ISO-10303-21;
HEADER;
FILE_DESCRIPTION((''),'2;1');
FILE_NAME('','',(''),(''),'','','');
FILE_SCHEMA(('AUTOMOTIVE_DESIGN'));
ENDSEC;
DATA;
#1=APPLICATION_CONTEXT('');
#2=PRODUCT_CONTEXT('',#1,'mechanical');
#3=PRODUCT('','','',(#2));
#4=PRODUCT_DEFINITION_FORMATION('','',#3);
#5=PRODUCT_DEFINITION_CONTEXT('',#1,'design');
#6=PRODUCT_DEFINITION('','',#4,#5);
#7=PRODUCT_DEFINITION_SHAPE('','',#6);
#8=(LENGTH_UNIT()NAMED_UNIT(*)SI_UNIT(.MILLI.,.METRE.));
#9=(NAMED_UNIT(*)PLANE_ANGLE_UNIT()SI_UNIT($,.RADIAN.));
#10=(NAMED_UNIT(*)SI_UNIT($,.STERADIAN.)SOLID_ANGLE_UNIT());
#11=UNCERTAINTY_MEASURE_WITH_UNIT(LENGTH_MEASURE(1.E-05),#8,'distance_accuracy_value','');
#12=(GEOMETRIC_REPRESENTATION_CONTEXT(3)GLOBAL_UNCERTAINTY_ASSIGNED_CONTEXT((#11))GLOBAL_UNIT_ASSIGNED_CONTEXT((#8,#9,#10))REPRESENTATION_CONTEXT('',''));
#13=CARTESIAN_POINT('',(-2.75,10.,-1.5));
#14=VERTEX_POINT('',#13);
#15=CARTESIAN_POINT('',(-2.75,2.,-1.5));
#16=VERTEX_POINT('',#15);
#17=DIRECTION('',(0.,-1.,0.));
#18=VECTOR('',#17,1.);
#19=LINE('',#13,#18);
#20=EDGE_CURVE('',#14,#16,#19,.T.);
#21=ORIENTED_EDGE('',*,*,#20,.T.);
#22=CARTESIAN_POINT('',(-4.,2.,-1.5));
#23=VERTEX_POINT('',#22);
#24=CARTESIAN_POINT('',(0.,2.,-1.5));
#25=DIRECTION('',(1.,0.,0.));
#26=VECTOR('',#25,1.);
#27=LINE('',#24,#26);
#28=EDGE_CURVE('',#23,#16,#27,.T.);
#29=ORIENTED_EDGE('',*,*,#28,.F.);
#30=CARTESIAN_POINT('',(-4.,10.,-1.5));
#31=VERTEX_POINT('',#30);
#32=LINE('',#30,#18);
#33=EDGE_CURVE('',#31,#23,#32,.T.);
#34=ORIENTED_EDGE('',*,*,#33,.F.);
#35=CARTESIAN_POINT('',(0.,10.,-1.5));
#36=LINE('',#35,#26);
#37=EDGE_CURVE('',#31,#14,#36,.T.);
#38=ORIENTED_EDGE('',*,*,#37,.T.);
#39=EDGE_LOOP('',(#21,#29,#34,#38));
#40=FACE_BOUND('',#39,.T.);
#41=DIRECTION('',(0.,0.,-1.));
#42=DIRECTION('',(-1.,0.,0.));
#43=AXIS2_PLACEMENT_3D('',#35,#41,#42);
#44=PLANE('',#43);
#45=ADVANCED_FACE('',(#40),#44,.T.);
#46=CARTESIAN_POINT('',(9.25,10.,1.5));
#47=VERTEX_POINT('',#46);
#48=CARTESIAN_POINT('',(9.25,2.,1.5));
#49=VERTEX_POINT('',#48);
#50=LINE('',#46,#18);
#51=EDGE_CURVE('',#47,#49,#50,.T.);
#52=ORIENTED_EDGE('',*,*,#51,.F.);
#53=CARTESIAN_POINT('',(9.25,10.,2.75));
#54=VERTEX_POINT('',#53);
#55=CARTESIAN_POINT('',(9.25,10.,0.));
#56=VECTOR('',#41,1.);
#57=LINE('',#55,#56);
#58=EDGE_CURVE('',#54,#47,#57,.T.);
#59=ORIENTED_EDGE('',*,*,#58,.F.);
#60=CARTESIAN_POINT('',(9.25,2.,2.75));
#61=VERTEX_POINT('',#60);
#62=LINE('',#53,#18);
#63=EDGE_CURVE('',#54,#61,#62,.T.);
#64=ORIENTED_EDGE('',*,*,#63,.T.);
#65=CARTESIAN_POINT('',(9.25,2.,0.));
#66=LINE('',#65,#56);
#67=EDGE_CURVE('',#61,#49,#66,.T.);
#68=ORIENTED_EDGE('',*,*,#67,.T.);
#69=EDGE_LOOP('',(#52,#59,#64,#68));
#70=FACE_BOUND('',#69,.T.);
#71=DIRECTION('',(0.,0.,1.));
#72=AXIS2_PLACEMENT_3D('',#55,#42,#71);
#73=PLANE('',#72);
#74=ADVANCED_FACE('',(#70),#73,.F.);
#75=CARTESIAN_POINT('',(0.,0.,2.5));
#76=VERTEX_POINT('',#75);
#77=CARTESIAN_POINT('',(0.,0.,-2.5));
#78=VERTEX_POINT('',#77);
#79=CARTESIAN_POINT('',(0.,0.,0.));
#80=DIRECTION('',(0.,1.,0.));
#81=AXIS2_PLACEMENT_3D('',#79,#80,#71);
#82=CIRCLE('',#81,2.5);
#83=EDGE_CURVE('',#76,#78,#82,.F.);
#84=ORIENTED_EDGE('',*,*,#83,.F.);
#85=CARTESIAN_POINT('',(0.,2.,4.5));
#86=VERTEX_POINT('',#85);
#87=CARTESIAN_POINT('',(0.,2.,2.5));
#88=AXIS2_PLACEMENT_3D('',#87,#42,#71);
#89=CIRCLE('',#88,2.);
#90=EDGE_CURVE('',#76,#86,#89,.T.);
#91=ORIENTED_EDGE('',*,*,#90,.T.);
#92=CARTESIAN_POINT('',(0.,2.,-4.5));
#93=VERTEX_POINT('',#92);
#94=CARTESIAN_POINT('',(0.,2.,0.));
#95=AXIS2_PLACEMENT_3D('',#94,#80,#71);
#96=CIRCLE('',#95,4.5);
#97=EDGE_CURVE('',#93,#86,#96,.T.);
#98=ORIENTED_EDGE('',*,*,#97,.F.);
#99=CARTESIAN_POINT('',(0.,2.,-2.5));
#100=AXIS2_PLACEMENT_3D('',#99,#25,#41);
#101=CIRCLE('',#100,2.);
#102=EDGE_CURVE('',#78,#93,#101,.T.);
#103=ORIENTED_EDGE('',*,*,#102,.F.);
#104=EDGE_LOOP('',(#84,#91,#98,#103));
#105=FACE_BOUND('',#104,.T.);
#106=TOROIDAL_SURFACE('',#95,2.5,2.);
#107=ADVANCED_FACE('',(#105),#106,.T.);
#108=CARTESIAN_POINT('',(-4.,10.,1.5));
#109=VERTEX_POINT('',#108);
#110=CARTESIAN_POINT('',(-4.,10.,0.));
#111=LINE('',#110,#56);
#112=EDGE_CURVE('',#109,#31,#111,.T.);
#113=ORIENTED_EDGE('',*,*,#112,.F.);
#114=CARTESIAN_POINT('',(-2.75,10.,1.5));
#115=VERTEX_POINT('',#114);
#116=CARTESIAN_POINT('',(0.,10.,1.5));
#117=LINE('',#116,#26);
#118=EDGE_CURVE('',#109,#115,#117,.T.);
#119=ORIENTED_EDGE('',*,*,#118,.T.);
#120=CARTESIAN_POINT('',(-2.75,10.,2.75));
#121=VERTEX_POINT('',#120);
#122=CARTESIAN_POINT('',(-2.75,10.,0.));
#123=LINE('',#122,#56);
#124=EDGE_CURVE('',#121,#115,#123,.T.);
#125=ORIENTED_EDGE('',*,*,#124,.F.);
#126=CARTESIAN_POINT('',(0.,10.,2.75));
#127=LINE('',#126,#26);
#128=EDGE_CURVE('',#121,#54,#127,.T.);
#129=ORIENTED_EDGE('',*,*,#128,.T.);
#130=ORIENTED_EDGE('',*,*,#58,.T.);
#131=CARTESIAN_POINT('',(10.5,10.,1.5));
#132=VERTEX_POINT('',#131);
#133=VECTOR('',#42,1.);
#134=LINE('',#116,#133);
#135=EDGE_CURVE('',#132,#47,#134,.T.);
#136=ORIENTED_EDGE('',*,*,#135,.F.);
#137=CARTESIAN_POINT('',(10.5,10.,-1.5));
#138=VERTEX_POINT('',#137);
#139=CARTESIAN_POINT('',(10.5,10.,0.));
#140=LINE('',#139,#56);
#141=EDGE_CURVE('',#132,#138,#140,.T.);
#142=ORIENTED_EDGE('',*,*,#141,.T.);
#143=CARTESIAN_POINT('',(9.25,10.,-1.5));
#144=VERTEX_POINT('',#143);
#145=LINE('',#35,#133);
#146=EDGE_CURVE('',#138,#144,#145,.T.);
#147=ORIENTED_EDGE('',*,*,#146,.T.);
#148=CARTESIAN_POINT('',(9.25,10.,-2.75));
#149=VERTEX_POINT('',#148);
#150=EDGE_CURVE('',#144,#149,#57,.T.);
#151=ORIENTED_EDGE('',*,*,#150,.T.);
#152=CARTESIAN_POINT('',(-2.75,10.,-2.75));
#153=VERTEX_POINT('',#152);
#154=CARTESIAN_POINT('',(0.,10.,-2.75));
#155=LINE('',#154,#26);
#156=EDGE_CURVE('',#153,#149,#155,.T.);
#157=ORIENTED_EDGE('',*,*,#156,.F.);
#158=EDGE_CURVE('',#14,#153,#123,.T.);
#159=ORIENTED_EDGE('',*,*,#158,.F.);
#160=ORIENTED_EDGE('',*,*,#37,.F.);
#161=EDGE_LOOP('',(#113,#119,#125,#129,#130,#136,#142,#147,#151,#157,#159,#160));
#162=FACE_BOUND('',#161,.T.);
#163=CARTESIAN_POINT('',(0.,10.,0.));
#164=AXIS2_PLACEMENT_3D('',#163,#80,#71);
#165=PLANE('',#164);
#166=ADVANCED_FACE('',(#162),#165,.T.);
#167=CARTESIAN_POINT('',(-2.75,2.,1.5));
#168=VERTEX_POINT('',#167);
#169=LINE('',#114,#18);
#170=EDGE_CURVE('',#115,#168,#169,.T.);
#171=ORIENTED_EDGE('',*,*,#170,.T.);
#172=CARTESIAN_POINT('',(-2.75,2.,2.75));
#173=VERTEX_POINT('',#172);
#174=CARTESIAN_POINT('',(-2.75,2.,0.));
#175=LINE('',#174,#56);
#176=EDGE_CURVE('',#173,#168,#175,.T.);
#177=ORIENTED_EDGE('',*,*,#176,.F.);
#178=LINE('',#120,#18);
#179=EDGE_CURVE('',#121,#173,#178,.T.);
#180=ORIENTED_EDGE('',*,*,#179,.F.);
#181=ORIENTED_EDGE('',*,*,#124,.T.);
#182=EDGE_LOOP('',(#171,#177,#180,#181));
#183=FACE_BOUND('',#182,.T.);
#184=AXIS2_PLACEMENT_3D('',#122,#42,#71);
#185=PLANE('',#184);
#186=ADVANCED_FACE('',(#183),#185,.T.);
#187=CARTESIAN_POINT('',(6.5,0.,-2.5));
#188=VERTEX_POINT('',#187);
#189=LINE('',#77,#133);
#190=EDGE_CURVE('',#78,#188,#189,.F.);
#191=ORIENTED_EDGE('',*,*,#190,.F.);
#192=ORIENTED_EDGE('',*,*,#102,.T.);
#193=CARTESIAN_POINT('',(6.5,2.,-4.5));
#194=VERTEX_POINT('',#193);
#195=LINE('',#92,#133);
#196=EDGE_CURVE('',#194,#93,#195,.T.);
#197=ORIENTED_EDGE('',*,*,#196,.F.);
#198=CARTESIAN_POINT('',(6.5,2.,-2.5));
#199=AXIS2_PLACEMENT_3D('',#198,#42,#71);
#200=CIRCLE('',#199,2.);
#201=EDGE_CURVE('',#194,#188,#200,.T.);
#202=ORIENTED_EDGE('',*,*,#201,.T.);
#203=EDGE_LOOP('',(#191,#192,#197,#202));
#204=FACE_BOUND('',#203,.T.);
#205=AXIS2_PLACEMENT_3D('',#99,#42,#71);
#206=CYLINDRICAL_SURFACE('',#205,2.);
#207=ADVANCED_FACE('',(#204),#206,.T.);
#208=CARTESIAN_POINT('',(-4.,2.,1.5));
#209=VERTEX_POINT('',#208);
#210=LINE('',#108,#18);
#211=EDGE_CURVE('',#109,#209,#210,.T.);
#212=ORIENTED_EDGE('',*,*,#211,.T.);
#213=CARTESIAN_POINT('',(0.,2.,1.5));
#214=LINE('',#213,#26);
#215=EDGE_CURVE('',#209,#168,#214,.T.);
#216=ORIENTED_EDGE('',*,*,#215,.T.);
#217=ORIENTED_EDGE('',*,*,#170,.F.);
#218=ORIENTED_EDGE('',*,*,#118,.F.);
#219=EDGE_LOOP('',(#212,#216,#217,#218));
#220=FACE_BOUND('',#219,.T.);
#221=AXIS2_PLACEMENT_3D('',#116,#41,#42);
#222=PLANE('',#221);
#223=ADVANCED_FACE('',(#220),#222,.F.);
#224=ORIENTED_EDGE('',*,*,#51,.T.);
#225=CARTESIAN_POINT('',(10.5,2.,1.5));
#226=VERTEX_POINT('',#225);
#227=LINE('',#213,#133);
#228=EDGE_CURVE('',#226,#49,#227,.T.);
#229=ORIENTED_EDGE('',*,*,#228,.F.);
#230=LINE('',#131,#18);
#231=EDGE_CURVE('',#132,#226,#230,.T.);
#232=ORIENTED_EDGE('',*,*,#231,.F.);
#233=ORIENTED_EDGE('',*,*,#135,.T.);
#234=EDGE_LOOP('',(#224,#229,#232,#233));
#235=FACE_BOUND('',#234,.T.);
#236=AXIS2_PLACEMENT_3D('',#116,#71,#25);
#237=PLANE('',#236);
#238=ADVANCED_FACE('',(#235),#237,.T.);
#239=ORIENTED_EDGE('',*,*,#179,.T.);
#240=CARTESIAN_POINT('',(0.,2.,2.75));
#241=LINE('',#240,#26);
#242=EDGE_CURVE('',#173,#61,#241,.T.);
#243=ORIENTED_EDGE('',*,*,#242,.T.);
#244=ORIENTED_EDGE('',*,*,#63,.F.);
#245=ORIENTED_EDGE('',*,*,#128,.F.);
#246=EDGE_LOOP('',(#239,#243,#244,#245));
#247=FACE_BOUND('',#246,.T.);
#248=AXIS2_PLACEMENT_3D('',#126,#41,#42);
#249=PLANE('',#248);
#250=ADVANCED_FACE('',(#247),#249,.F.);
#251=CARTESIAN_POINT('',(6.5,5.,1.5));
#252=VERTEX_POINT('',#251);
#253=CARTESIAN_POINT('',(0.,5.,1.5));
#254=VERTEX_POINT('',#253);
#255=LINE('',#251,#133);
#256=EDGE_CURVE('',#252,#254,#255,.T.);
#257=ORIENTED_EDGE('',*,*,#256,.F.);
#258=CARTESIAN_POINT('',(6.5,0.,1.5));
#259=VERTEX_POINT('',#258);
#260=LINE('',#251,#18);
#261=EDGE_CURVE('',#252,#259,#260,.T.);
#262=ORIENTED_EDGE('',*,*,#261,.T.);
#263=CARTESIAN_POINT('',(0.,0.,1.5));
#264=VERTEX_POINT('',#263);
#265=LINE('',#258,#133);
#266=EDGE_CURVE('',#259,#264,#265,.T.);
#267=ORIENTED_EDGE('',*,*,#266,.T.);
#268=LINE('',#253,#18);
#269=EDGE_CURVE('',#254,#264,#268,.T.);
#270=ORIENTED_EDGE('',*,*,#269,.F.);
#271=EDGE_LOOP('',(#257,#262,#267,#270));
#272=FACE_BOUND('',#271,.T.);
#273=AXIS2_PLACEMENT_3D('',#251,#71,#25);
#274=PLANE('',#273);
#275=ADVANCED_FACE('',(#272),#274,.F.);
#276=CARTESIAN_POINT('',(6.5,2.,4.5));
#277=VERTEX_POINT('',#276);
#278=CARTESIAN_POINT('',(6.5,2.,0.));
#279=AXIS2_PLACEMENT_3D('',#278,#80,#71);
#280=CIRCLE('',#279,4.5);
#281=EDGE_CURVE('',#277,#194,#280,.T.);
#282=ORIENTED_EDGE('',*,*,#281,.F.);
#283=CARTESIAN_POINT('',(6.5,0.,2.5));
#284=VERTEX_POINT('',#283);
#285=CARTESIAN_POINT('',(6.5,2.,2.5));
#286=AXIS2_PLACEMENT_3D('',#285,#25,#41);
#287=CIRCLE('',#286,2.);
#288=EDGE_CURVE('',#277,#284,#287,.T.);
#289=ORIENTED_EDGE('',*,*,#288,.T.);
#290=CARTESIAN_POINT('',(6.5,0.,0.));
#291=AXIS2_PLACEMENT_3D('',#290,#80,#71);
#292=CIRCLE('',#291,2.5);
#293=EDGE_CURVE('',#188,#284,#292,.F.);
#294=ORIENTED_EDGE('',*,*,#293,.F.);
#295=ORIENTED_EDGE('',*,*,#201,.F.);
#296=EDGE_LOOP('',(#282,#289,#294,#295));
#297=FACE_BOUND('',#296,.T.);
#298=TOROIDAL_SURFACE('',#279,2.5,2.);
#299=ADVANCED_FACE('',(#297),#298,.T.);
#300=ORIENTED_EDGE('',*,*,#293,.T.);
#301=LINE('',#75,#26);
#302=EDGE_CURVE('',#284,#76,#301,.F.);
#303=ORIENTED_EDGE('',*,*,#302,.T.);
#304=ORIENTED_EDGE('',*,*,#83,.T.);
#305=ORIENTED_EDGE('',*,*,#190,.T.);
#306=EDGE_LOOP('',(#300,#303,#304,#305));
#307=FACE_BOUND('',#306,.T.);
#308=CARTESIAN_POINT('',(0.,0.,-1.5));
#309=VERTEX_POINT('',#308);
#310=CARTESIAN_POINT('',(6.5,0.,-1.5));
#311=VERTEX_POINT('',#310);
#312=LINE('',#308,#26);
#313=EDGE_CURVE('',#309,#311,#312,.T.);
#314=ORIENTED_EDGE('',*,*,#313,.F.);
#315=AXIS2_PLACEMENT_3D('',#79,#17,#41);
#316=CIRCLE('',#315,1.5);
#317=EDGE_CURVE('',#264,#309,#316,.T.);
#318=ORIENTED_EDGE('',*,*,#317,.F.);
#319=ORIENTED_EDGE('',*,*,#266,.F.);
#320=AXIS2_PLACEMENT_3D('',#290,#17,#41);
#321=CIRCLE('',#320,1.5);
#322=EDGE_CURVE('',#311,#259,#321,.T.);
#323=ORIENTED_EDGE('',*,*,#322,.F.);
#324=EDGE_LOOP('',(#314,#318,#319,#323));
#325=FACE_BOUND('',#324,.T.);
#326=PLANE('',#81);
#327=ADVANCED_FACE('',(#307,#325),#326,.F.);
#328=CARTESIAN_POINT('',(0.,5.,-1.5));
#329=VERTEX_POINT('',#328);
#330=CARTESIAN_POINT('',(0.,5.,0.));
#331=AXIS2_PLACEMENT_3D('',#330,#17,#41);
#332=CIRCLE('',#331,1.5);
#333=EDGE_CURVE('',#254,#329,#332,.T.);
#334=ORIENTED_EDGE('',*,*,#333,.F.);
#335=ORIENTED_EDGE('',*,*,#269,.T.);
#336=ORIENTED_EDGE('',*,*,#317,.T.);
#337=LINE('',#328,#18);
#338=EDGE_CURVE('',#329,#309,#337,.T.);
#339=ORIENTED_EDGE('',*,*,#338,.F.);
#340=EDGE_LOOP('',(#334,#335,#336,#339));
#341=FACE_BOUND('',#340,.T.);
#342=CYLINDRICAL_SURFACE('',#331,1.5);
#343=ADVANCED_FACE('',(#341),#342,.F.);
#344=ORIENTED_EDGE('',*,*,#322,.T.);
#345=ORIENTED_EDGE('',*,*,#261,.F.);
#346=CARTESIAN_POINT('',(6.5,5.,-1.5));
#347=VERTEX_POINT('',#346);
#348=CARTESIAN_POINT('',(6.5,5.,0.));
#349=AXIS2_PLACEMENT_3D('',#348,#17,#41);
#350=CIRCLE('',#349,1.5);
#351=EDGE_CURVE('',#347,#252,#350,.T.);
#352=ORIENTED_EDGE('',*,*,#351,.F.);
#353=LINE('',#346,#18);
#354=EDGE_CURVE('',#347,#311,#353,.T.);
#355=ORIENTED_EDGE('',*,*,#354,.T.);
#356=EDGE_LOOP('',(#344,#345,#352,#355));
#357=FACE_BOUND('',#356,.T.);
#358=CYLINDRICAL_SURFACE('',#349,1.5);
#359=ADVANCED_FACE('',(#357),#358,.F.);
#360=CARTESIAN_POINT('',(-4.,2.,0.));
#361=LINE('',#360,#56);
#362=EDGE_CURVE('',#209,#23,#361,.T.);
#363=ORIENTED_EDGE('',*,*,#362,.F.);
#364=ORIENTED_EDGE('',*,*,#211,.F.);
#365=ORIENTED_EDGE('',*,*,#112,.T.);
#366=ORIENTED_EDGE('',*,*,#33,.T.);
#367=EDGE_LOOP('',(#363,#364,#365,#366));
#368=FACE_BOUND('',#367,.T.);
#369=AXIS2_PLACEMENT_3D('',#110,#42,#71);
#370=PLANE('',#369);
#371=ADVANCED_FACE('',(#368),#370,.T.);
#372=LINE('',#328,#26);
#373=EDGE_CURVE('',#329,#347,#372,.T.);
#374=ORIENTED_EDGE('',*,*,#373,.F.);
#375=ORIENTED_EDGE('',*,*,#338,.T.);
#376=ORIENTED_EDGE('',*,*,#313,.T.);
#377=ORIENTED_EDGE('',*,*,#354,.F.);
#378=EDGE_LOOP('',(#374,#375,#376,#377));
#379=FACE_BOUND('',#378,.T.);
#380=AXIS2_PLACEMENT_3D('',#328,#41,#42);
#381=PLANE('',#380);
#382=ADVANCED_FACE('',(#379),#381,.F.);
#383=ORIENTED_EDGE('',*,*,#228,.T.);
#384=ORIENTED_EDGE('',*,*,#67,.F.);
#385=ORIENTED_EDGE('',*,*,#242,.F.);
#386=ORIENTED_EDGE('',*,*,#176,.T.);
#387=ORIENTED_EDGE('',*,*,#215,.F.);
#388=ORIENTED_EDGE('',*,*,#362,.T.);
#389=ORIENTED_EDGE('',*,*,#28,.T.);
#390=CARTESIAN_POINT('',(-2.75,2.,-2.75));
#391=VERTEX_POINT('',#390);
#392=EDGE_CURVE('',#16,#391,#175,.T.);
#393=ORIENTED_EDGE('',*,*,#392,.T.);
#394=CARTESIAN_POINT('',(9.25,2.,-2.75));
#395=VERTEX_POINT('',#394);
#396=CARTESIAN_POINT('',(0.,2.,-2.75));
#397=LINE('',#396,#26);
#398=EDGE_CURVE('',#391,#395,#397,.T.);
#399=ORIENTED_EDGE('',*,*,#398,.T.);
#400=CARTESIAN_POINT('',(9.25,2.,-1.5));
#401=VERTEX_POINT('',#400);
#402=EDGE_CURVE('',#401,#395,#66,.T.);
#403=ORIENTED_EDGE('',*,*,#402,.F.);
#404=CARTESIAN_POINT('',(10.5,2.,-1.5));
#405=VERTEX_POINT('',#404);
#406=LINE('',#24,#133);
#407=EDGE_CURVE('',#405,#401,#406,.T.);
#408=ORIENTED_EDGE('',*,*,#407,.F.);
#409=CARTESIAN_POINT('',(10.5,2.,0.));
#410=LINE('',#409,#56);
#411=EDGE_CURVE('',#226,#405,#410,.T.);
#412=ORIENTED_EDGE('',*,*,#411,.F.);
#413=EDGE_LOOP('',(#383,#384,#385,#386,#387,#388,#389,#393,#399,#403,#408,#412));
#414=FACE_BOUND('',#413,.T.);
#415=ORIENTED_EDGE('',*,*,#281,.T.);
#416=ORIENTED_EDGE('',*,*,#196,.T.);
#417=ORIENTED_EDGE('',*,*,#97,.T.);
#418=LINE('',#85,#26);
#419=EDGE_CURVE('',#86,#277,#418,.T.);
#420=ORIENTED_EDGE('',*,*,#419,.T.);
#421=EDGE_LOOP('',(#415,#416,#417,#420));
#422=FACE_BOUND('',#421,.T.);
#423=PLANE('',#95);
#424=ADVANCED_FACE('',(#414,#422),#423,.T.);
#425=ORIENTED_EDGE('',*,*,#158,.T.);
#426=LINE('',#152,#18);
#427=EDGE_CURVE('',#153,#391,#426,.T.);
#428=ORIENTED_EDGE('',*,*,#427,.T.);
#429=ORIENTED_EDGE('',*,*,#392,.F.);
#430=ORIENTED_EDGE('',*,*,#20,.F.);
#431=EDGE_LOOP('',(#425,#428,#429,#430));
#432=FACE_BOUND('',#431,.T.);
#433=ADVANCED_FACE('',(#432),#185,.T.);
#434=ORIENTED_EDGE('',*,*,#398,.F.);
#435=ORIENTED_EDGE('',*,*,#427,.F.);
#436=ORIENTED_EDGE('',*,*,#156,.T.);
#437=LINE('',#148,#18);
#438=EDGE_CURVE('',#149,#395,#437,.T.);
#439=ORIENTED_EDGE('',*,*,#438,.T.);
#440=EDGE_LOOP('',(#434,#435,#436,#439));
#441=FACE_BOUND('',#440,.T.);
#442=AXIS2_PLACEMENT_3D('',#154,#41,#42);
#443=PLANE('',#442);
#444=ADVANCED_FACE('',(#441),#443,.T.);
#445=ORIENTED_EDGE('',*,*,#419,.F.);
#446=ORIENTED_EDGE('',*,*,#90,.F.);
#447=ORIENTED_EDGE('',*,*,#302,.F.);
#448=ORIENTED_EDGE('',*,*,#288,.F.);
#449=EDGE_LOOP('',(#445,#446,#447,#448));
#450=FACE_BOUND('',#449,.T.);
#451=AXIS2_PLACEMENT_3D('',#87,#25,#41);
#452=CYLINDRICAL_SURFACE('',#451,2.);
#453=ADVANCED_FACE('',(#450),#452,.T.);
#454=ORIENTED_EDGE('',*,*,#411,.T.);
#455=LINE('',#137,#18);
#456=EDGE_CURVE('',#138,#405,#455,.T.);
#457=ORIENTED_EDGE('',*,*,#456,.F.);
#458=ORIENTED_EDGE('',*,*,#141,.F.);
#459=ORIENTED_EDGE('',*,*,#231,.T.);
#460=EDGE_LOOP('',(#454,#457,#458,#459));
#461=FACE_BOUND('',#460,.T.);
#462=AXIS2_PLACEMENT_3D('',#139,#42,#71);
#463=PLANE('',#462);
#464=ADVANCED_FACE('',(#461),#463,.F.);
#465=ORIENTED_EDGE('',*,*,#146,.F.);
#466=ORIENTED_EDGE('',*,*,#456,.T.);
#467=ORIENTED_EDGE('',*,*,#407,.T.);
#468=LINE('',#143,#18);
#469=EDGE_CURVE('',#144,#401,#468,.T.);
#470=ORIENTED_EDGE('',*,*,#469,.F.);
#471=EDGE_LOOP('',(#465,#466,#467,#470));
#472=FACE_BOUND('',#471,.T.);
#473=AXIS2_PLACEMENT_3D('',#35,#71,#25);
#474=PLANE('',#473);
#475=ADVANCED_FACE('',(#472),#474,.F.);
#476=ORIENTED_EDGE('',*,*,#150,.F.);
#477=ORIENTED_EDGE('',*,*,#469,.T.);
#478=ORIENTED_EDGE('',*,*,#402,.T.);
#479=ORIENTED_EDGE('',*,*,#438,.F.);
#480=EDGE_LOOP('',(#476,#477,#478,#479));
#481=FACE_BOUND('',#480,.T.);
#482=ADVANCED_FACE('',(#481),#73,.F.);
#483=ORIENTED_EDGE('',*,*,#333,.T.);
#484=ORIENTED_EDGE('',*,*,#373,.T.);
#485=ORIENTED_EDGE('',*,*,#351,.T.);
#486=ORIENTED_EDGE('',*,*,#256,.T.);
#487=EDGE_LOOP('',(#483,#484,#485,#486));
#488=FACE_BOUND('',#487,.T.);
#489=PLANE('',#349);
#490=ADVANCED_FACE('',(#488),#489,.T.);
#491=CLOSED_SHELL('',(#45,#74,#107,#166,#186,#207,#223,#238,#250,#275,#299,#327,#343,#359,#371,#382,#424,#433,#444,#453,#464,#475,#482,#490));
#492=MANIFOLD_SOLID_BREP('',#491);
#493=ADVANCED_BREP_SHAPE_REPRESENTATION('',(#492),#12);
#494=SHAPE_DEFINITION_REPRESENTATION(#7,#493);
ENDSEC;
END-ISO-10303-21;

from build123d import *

# Parameters (mm, degrees)
BOSS_EXTRU_1_DEPTH      = 2
CONG_1_R                = 2
BOSS_EXTRU_2_DEPTH      = 8
ENL_V_MAT_EXTRU_1_DEPTH = 5


with BuildPart() as part:
    # Esquisse1 → Boss.-Extru.1 (new body)
    with BuildSketch(Plane(origin=(0, 0, 0), x_dir=(1, 0, 0), z_dir=(0, 1, 0))):
        with BuildLine():
            Line((0, 4.5), (6.5, 4.5))
            ThreePointArc((6.5, 4.5), (11, 0), (6.5, -4.5))
            Line((6.5, -4.5), (0, -4.5))
            ThreePointArc((0, -4.5), (-4.5, 0), (0, 4.5))
        make_face()
    extrude(amount=BOSS_EXTRU_1_DEPTH)

    # Congé1
    cong_1_edges = [part.edges().sort_by_distance(p)[0] for p in [
        (3.25, 0, -4.5),
        (11, 0, 0),
        (-4.5, 0, 0),
        (3.25, 0, 4.5),
    ]]
    fillet(cong_1_edges, radius=CONG_1_R - 0.0001)  # a hair under: the kernel refuses the full size

    # Esquisse2 → Boss.-Extru.2 (add)
    with BuildSketch(Plane(origin=(0, 2, 0), x_dir=(1, 0, 0), z_dir=(0, 1, 0))):
        Polygon((-2.75, -2.75), (9.25, -2.75), (9.25, -1.5), (10.5, -1.5), (10.5, 1.5), (9.25, 1.5), (9.25, 2.75), (-2.75, 2.75), (-2.75, 1.5), (-4, 1.5), (-4, -1.5), (-2.75, -1.5), align=None)
    extrude(amount=BOSS_EXTRU_2_DEPTH)

    # Esquisse4 → Enlèv. mat.-Extru.1 (cut)
    with BuildSketch(Plane.XZ):
        with BuildLine():
            Line((6.5, 1.5), (0, 1.5))
            ThreePointArc((0, 1.5), (-1.5, 0), (0, -1.5))
            Line((0, -1.5), (6.5, -1.5))
            ThreePointArc((6.5, -1.5), (8, 0), (6.5, 1.5))
        make_face()
    extrude(amount=-ENL_V_MAT_EXTRU_1_DEPTH, mode=Mode.SUBTRACT)


solid = part.part
